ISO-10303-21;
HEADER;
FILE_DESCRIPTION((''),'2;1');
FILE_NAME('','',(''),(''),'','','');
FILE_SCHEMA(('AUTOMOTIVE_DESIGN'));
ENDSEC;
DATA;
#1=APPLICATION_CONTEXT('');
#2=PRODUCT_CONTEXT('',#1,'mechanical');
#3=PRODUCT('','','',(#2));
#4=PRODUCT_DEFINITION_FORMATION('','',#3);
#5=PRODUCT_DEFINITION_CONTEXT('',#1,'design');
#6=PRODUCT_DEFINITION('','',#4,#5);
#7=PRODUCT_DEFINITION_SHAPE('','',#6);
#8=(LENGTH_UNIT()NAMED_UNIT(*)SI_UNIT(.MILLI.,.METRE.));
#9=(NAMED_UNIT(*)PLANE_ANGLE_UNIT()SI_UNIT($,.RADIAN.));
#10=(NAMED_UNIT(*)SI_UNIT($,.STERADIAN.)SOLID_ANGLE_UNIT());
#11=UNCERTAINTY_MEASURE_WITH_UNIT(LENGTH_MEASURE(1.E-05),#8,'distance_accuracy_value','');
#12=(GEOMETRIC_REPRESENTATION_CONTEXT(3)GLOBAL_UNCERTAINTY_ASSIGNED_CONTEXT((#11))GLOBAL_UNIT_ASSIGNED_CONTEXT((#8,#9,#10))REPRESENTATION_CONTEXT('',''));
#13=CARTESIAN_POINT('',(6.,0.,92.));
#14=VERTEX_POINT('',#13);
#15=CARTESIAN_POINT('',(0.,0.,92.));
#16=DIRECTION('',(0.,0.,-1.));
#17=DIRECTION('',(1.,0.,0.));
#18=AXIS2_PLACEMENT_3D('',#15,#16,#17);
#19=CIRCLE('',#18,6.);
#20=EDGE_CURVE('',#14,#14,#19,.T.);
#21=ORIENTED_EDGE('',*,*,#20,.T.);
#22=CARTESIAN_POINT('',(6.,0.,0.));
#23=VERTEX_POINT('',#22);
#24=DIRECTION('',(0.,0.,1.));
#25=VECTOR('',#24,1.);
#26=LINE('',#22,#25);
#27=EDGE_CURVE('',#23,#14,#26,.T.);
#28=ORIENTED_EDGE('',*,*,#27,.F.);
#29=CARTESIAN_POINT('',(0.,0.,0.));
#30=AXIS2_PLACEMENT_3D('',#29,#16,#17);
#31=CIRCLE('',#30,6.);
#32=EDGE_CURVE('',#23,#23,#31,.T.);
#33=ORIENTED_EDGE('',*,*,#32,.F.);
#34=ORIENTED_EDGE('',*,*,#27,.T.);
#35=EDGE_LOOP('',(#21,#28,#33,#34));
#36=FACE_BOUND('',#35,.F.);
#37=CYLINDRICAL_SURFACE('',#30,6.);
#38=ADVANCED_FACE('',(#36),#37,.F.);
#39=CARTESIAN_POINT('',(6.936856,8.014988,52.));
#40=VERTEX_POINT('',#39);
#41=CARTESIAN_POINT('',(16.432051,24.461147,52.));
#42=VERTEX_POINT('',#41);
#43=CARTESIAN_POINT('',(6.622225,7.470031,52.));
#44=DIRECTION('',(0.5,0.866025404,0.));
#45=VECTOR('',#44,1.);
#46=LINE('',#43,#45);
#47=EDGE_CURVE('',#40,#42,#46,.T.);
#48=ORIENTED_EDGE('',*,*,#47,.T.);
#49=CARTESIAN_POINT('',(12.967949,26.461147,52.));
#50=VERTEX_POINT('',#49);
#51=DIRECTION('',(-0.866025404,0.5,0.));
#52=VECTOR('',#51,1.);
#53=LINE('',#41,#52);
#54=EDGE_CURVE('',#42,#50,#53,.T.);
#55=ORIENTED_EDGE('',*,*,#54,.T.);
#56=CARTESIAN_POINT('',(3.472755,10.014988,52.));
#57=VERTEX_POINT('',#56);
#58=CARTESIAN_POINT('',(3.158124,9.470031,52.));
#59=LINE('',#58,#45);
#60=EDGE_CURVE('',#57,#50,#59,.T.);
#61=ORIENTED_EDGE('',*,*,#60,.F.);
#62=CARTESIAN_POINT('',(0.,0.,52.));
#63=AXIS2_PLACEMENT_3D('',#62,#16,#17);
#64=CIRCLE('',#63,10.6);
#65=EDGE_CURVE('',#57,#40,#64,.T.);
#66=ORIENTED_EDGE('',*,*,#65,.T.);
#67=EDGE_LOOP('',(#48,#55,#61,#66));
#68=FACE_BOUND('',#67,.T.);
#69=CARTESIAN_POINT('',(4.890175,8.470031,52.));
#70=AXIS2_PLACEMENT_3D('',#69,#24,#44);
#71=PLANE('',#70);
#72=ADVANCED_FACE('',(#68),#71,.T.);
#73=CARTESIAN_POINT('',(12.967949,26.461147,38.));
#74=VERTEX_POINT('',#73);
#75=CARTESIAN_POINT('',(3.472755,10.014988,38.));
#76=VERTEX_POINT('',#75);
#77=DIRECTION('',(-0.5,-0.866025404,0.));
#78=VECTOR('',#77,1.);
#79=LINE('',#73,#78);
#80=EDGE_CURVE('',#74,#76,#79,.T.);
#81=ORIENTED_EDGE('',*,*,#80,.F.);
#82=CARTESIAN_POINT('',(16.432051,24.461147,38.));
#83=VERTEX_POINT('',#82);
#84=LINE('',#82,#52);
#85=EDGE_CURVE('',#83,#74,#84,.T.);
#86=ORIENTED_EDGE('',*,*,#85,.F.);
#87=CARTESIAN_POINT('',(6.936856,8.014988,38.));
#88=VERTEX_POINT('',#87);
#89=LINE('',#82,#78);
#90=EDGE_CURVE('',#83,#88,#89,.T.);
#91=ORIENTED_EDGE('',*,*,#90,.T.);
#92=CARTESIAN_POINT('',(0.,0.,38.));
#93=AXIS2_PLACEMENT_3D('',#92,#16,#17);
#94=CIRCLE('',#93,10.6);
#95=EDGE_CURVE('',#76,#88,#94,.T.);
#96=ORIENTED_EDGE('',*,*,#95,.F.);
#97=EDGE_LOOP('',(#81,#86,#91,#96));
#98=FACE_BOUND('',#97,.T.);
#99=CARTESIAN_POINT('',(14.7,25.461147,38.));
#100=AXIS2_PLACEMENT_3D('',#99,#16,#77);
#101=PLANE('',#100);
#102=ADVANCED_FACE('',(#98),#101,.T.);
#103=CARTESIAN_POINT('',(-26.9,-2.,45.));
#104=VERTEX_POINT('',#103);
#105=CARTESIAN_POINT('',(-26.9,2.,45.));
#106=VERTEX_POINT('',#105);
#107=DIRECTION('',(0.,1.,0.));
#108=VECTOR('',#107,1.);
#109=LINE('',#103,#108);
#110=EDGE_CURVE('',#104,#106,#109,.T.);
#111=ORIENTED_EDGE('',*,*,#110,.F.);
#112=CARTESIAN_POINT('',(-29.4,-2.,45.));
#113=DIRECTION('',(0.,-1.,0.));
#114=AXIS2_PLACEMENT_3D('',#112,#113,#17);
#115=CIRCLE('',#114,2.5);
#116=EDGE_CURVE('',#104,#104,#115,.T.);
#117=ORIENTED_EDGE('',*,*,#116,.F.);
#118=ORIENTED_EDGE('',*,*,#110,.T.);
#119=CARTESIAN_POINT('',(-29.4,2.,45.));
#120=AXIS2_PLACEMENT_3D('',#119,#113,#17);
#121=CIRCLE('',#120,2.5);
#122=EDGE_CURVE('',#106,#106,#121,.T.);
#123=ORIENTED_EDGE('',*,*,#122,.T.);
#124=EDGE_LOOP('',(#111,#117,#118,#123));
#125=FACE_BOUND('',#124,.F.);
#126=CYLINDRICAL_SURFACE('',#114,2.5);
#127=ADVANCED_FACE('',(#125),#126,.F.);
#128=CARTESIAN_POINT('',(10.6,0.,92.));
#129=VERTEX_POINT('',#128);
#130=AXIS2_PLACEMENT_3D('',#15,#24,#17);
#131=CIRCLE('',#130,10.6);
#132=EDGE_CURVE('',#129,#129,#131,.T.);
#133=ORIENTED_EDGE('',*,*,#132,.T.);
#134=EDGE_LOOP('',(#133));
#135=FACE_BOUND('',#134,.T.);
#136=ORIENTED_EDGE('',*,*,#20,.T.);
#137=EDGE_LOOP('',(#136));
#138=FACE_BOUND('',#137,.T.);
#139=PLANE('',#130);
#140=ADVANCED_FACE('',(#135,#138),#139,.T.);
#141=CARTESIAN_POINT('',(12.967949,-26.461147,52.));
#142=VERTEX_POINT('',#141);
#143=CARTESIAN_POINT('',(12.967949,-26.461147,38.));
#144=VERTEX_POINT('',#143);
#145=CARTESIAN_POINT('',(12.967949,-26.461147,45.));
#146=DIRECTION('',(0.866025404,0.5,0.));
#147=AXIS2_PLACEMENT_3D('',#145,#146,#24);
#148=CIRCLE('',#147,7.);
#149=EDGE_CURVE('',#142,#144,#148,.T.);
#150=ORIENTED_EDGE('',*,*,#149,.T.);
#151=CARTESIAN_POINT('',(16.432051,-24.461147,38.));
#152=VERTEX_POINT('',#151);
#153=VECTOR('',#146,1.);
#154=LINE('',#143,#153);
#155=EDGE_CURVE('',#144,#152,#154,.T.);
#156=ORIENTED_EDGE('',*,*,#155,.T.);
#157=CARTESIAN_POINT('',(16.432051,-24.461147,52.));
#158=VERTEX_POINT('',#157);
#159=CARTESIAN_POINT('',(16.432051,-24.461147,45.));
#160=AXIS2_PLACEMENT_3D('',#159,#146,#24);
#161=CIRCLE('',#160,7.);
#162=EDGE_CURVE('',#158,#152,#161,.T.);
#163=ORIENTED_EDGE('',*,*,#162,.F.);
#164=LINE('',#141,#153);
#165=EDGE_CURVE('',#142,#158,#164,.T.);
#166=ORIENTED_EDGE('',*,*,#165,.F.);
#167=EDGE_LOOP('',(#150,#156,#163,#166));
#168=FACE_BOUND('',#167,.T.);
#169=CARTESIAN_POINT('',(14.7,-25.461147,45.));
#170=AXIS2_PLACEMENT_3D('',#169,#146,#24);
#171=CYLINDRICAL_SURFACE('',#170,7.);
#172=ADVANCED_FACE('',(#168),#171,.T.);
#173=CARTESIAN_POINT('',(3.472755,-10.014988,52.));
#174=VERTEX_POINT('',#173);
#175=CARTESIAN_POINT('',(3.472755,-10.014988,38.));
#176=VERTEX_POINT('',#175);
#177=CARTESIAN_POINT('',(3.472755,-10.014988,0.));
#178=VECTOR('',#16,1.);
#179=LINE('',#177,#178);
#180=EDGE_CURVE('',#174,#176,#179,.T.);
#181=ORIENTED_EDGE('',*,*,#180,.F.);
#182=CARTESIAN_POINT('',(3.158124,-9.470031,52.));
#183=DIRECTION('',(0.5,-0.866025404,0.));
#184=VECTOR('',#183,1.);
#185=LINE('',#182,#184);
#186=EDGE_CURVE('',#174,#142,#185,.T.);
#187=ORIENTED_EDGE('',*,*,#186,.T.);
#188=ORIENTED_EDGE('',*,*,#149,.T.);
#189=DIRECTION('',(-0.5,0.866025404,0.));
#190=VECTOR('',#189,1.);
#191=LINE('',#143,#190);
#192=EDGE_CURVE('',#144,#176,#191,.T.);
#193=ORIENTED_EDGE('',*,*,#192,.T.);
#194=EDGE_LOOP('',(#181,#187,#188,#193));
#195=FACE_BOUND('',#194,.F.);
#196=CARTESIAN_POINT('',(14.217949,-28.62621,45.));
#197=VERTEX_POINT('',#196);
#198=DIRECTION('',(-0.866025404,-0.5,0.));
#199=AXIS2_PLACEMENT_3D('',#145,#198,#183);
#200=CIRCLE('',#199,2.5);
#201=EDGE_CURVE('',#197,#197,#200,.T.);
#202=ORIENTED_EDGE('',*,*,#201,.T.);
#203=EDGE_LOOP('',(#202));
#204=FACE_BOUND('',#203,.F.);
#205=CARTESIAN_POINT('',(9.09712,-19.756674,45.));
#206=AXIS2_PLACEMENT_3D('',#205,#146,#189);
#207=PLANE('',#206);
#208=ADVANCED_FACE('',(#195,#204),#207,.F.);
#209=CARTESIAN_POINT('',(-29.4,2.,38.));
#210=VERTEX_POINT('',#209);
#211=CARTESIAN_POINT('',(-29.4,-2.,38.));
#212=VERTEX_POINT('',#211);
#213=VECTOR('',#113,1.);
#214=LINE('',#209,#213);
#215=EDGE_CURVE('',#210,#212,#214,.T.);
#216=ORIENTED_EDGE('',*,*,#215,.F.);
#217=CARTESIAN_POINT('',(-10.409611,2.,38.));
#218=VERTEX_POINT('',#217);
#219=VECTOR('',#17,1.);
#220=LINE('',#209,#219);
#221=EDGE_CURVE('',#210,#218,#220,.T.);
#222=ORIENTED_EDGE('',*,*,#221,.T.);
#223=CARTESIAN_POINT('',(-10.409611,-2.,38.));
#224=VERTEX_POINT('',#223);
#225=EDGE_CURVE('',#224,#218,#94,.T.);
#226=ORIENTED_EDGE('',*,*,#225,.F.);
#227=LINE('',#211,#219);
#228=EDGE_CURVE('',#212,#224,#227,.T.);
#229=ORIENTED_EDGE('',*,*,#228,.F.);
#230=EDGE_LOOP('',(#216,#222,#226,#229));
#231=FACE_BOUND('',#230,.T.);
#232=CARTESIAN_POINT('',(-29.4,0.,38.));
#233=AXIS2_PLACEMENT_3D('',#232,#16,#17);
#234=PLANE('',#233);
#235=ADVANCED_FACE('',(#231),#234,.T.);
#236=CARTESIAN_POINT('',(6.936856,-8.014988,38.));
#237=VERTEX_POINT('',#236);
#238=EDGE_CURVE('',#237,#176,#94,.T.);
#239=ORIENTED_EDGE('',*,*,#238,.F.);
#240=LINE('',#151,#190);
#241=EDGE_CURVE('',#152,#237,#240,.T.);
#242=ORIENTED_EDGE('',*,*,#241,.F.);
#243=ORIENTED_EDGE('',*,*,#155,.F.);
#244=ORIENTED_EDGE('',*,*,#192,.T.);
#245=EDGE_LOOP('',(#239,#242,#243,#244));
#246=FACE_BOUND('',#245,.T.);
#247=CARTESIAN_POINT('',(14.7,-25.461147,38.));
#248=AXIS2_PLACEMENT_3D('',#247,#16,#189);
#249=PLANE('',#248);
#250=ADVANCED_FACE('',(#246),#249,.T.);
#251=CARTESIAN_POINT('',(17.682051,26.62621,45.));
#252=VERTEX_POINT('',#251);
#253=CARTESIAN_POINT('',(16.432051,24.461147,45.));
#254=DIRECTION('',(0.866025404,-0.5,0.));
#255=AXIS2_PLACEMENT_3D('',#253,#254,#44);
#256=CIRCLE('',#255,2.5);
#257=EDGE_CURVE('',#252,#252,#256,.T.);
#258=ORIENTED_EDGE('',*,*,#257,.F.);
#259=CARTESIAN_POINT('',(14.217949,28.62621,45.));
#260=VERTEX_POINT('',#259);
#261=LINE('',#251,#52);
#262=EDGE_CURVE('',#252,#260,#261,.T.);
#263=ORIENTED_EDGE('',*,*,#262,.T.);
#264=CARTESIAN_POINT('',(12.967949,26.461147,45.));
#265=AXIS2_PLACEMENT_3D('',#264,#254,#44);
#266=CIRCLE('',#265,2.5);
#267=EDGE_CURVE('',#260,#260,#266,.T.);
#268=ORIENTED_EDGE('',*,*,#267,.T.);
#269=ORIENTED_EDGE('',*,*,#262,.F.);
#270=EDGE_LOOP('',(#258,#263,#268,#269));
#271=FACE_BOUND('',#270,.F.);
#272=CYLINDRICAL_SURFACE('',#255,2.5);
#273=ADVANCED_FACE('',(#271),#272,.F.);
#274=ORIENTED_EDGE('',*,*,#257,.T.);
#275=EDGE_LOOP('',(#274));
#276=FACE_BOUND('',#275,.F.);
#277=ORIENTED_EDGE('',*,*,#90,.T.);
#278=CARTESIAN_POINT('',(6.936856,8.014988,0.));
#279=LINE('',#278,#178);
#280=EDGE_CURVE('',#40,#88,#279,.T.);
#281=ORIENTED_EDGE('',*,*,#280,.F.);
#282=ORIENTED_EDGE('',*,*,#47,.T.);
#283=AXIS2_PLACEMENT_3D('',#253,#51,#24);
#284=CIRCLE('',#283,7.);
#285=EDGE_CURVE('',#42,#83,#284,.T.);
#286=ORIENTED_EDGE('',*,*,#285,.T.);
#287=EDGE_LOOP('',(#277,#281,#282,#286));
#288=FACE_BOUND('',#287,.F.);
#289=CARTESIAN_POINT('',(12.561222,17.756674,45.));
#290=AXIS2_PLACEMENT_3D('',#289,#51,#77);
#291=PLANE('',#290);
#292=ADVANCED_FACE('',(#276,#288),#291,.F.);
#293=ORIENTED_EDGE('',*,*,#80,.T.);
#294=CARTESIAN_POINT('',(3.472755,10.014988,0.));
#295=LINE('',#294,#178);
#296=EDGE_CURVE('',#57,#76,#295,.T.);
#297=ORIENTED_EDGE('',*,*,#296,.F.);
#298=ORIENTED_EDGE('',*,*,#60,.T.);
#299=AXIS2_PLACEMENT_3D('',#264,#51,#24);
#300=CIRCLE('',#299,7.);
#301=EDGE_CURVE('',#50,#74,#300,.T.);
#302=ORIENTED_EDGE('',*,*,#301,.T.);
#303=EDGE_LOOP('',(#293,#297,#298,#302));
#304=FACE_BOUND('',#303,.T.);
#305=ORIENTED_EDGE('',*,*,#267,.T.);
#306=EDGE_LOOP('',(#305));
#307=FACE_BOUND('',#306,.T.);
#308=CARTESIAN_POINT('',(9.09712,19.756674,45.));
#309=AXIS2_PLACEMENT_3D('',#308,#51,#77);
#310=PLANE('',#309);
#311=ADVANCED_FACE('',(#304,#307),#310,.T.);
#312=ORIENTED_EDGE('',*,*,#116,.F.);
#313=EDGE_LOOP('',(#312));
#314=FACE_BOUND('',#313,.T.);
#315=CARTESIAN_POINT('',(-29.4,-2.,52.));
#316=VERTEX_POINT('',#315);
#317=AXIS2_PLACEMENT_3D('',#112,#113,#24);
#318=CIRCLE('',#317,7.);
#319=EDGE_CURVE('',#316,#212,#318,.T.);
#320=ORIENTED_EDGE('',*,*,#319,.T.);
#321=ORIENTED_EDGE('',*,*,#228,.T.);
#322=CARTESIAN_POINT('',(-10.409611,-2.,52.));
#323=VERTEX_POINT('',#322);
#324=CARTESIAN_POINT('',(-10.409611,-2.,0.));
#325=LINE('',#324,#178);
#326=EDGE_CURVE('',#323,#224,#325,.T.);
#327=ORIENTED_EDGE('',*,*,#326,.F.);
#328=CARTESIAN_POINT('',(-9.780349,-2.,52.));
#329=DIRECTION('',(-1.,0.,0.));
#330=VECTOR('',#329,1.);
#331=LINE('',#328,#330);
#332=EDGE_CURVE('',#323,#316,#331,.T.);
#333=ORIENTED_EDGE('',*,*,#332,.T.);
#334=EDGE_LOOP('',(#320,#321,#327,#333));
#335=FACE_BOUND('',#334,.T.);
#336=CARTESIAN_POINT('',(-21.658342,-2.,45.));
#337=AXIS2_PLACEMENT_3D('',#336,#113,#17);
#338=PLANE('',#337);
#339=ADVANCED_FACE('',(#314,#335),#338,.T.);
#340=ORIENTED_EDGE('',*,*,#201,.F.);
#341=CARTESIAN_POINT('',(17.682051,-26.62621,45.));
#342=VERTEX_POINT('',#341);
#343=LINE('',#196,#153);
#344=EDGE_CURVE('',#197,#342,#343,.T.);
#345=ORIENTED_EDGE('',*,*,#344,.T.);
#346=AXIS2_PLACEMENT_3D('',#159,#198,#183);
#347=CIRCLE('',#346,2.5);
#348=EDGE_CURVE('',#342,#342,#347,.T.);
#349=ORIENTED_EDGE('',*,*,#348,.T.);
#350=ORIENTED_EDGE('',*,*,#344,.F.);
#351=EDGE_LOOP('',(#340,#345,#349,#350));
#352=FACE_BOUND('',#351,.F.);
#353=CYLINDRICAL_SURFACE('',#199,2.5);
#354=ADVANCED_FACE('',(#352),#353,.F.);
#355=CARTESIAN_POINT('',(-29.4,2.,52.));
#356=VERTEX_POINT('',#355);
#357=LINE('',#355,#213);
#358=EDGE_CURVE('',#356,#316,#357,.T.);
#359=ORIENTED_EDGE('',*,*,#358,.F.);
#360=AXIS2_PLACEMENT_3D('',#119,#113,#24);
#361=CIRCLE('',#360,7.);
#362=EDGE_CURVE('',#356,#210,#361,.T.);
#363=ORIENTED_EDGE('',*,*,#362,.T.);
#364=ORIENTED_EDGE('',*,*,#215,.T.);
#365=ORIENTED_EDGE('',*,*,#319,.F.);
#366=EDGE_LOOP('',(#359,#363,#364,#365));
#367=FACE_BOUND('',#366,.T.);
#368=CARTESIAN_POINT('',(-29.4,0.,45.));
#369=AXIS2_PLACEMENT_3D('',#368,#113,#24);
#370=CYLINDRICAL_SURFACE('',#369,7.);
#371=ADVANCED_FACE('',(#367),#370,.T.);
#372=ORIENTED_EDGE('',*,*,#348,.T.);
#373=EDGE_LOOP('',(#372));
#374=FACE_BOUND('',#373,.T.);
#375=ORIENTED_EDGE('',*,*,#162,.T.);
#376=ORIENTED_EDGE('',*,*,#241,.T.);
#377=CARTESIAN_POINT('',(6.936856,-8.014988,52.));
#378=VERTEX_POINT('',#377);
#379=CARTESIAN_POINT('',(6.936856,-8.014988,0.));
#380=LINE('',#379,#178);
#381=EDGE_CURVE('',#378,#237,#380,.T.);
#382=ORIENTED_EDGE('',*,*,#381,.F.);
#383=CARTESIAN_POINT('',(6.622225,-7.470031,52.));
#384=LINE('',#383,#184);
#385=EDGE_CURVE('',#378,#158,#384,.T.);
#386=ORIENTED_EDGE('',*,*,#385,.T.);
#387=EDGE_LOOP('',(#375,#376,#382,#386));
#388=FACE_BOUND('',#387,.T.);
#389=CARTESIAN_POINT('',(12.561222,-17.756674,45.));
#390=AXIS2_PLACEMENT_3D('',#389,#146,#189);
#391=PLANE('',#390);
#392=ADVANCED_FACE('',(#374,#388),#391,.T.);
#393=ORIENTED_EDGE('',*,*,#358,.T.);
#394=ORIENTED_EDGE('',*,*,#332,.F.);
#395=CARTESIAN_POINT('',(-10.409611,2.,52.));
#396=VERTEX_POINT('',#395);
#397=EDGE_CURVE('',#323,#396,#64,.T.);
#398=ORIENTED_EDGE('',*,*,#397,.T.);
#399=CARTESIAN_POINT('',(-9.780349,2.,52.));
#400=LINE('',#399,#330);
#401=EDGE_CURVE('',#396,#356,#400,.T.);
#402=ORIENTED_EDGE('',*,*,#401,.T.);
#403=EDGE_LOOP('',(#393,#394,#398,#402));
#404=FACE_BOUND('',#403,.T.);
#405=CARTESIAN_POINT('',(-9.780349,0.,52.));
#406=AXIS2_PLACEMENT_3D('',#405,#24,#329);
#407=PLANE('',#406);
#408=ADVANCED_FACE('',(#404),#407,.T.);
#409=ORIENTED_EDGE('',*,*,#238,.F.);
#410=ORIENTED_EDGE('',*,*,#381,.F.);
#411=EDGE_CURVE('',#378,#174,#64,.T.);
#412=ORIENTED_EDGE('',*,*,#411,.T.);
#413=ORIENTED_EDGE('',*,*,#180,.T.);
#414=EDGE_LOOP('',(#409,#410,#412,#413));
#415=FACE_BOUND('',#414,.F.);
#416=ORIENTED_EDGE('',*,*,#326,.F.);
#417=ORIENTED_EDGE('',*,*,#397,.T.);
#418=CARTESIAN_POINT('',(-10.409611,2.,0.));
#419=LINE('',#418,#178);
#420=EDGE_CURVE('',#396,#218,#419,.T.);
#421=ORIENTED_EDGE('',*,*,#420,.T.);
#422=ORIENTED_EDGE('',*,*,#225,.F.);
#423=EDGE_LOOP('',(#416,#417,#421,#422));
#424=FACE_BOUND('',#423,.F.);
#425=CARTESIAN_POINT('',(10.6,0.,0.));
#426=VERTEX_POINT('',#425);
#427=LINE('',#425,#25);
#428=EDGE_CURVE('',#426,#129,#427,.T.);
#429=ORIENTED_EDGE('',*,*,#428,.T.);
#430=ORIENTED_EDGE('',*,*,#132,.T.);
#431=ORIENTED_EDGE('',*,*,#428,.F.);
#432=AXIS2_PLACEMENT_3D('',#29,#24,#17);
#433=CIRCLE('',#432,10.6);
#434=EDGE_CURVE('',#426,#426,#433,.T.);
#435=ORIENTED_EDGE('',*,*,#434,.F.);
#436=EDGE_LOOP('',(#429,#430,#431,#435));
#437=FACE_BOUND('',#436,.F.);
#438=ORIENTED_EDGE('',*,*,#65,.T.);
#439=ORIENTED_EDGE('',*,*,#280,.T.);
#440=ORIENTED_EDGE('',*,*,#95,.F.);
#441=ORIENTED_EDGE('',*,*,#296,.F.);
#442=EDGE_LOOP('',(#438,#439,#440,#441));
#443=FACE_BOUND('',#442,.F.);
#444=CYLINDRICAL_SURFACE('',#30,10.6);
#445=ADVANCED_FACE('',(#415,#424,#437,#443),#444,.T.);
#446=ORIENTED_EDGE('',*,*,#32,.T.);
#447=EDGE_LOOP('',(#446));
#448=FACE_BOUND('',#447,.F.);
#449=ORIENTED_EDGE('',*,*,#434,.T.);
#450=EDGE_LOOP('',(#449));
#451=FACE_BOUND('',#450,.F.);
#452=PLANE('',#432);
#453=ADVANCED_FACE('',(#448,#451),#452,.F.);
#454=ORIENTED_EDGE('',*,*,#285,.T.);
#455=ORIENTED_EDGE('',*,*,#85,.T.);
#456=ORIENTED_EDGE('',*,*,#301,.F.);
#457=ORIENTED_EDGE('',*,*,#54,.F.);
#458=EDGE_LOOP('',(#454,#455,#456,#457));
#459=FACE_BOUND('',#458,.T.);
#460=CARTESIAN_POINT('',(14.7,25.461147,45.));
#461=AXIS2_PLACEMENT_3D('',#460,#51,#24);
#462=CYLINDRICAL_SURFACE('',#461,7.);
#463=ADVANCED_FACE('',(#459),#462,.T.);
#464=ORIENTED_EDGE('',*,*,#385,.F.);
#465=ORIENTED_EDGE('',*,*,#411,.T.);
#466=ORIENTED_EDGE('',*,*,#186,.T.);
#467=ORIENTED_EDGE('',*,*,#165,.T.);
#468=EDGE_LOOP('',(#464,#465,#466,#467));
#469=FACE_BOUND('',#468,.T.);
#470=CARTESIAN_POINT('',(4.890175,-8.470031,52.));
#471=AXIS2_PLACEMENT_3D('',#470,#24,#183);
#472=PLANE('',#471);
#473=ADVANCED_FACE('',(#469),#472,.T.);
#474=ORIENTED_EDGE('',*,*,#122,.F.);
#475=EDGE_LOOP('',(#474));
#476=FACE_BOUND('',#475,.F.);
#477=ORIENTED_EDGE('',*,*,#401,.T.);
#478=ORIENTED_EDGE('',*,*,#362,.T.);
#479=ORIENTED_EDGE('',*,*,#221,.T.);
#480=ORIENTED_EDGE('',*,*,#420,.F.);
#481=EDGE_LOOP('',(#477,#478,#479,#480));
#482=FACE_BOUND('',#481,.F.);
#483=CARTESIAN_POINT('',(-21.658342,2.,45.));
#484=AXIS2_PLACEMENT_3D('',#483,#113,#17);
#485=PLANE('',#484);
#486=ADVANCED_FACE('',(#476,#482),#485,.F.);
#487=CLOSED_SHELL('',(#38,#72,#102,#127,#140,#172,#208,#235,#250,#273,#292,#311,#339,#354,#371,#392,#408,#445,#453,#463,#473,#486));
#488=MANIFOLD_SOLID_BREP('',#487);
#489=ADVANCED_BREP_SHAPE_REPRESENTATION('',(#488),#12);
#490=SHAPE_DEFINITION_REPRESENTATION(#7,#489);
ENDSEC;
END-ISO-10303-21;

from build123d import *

# Parameters (mm, degrees)
F0_R            = 10.6
F1_DEPTH        = 92
F2_R            = 6
F3_DEPTH        = 98.1
F5_DEPTH        = 2
F5_COPIES_COUNT = 3
F7_R            = 2.5
F8_DEPTH        = 4
F9_R            = 2.5
F10_DEPTH       = 4
F11_R           = 2.5
F12_DEPTH       = 4


# Not quite as in the source:
# - a feature of the source that left no trace in its solid (it failed there, or was rolled back) is left out
# - a pattern or mirror of a feature is missing from the dataset's text; its kind, count and spacing are read off the source's solid


with BuildPart() as f1:
    # F0 (on Top) → F1 (new body)
    with BuildSketch(Plane.XY):
        Circle(F0_R)
    extrude(amount=F1_DEPTH)

    # F2 (on face) → F3 (cut)
    with BuildSketch(Plane(origin=(0, 0, 0), x_dir=(1, 0, 0), z_dir=(0, 0, -1))):
        Circle(F2_R)
    extrude(amount=-F3_DEPTH, mode=Mode.SUBTRACT)

    # F4 (on Front) → F5 (join, symmetric)
    with BuildSketch(Plane.XZ):
        with BuildLine():
            Line((-9.7803492099, 52), (-29.4, 52))
            ThreePointArc((-29.4, 52), (-36.4, 45), (-29.4, 38))
            Line((-29.4, 38), (-9.7803492099, 38))
            Line((-9.7803492099, 38), (-9.7803492099, 52))
        make_face()
    f5 = extrude(amount=F5_DEPTH, both=True)

    # F5_copies: F5 ×3 about axis
    f5_copies_axis = Axis((0, 0, 0), (0, 0, 1))
    for i in range(1, F5_COPIES_COUNT):
        add(f5.rotate(f5_copies_axis, i * 360 / F5_COPIES_COUNT))

    # F7 (on face) → F8 (cut, through all)
    with BuildSketch(Plane.XZ.offset(2)):
        with Locations((-29.4, 45)):
            Circle(F7_R)
    extrude(amount=-F8_DEPTH, mode=Mode.SUBTRACT)

    # F9 (on face) → F10 (cut, through all)
    with BuildSketch(Plane(origin=(-1.7320508076, -1, 0), x_dir=(0.5, -0.8660254038, 0), z_dir=(-0.8660254038, -0.5, 0))):
        with Locations((29.4, 45)):
            Circle(F9_R)
    extrude(amount=-F10_DEPTH, mode=Mode.SUBTRACT)

    # F11 (on face) → F12 (cut, through all)
    with BuildSketch(Plane(origin=(1.7320508076, -1, 0), x_dir=(0.5, 0.8660254038, 0), z_dir=(0.8660254038, -0.5, 0))):
        with Locations((29.4, 45)):
            Circle(F11_R)
    extrude(amount=-F12_DEPTH, mode=Mode.SUBTRACT)


solid = f1.part
